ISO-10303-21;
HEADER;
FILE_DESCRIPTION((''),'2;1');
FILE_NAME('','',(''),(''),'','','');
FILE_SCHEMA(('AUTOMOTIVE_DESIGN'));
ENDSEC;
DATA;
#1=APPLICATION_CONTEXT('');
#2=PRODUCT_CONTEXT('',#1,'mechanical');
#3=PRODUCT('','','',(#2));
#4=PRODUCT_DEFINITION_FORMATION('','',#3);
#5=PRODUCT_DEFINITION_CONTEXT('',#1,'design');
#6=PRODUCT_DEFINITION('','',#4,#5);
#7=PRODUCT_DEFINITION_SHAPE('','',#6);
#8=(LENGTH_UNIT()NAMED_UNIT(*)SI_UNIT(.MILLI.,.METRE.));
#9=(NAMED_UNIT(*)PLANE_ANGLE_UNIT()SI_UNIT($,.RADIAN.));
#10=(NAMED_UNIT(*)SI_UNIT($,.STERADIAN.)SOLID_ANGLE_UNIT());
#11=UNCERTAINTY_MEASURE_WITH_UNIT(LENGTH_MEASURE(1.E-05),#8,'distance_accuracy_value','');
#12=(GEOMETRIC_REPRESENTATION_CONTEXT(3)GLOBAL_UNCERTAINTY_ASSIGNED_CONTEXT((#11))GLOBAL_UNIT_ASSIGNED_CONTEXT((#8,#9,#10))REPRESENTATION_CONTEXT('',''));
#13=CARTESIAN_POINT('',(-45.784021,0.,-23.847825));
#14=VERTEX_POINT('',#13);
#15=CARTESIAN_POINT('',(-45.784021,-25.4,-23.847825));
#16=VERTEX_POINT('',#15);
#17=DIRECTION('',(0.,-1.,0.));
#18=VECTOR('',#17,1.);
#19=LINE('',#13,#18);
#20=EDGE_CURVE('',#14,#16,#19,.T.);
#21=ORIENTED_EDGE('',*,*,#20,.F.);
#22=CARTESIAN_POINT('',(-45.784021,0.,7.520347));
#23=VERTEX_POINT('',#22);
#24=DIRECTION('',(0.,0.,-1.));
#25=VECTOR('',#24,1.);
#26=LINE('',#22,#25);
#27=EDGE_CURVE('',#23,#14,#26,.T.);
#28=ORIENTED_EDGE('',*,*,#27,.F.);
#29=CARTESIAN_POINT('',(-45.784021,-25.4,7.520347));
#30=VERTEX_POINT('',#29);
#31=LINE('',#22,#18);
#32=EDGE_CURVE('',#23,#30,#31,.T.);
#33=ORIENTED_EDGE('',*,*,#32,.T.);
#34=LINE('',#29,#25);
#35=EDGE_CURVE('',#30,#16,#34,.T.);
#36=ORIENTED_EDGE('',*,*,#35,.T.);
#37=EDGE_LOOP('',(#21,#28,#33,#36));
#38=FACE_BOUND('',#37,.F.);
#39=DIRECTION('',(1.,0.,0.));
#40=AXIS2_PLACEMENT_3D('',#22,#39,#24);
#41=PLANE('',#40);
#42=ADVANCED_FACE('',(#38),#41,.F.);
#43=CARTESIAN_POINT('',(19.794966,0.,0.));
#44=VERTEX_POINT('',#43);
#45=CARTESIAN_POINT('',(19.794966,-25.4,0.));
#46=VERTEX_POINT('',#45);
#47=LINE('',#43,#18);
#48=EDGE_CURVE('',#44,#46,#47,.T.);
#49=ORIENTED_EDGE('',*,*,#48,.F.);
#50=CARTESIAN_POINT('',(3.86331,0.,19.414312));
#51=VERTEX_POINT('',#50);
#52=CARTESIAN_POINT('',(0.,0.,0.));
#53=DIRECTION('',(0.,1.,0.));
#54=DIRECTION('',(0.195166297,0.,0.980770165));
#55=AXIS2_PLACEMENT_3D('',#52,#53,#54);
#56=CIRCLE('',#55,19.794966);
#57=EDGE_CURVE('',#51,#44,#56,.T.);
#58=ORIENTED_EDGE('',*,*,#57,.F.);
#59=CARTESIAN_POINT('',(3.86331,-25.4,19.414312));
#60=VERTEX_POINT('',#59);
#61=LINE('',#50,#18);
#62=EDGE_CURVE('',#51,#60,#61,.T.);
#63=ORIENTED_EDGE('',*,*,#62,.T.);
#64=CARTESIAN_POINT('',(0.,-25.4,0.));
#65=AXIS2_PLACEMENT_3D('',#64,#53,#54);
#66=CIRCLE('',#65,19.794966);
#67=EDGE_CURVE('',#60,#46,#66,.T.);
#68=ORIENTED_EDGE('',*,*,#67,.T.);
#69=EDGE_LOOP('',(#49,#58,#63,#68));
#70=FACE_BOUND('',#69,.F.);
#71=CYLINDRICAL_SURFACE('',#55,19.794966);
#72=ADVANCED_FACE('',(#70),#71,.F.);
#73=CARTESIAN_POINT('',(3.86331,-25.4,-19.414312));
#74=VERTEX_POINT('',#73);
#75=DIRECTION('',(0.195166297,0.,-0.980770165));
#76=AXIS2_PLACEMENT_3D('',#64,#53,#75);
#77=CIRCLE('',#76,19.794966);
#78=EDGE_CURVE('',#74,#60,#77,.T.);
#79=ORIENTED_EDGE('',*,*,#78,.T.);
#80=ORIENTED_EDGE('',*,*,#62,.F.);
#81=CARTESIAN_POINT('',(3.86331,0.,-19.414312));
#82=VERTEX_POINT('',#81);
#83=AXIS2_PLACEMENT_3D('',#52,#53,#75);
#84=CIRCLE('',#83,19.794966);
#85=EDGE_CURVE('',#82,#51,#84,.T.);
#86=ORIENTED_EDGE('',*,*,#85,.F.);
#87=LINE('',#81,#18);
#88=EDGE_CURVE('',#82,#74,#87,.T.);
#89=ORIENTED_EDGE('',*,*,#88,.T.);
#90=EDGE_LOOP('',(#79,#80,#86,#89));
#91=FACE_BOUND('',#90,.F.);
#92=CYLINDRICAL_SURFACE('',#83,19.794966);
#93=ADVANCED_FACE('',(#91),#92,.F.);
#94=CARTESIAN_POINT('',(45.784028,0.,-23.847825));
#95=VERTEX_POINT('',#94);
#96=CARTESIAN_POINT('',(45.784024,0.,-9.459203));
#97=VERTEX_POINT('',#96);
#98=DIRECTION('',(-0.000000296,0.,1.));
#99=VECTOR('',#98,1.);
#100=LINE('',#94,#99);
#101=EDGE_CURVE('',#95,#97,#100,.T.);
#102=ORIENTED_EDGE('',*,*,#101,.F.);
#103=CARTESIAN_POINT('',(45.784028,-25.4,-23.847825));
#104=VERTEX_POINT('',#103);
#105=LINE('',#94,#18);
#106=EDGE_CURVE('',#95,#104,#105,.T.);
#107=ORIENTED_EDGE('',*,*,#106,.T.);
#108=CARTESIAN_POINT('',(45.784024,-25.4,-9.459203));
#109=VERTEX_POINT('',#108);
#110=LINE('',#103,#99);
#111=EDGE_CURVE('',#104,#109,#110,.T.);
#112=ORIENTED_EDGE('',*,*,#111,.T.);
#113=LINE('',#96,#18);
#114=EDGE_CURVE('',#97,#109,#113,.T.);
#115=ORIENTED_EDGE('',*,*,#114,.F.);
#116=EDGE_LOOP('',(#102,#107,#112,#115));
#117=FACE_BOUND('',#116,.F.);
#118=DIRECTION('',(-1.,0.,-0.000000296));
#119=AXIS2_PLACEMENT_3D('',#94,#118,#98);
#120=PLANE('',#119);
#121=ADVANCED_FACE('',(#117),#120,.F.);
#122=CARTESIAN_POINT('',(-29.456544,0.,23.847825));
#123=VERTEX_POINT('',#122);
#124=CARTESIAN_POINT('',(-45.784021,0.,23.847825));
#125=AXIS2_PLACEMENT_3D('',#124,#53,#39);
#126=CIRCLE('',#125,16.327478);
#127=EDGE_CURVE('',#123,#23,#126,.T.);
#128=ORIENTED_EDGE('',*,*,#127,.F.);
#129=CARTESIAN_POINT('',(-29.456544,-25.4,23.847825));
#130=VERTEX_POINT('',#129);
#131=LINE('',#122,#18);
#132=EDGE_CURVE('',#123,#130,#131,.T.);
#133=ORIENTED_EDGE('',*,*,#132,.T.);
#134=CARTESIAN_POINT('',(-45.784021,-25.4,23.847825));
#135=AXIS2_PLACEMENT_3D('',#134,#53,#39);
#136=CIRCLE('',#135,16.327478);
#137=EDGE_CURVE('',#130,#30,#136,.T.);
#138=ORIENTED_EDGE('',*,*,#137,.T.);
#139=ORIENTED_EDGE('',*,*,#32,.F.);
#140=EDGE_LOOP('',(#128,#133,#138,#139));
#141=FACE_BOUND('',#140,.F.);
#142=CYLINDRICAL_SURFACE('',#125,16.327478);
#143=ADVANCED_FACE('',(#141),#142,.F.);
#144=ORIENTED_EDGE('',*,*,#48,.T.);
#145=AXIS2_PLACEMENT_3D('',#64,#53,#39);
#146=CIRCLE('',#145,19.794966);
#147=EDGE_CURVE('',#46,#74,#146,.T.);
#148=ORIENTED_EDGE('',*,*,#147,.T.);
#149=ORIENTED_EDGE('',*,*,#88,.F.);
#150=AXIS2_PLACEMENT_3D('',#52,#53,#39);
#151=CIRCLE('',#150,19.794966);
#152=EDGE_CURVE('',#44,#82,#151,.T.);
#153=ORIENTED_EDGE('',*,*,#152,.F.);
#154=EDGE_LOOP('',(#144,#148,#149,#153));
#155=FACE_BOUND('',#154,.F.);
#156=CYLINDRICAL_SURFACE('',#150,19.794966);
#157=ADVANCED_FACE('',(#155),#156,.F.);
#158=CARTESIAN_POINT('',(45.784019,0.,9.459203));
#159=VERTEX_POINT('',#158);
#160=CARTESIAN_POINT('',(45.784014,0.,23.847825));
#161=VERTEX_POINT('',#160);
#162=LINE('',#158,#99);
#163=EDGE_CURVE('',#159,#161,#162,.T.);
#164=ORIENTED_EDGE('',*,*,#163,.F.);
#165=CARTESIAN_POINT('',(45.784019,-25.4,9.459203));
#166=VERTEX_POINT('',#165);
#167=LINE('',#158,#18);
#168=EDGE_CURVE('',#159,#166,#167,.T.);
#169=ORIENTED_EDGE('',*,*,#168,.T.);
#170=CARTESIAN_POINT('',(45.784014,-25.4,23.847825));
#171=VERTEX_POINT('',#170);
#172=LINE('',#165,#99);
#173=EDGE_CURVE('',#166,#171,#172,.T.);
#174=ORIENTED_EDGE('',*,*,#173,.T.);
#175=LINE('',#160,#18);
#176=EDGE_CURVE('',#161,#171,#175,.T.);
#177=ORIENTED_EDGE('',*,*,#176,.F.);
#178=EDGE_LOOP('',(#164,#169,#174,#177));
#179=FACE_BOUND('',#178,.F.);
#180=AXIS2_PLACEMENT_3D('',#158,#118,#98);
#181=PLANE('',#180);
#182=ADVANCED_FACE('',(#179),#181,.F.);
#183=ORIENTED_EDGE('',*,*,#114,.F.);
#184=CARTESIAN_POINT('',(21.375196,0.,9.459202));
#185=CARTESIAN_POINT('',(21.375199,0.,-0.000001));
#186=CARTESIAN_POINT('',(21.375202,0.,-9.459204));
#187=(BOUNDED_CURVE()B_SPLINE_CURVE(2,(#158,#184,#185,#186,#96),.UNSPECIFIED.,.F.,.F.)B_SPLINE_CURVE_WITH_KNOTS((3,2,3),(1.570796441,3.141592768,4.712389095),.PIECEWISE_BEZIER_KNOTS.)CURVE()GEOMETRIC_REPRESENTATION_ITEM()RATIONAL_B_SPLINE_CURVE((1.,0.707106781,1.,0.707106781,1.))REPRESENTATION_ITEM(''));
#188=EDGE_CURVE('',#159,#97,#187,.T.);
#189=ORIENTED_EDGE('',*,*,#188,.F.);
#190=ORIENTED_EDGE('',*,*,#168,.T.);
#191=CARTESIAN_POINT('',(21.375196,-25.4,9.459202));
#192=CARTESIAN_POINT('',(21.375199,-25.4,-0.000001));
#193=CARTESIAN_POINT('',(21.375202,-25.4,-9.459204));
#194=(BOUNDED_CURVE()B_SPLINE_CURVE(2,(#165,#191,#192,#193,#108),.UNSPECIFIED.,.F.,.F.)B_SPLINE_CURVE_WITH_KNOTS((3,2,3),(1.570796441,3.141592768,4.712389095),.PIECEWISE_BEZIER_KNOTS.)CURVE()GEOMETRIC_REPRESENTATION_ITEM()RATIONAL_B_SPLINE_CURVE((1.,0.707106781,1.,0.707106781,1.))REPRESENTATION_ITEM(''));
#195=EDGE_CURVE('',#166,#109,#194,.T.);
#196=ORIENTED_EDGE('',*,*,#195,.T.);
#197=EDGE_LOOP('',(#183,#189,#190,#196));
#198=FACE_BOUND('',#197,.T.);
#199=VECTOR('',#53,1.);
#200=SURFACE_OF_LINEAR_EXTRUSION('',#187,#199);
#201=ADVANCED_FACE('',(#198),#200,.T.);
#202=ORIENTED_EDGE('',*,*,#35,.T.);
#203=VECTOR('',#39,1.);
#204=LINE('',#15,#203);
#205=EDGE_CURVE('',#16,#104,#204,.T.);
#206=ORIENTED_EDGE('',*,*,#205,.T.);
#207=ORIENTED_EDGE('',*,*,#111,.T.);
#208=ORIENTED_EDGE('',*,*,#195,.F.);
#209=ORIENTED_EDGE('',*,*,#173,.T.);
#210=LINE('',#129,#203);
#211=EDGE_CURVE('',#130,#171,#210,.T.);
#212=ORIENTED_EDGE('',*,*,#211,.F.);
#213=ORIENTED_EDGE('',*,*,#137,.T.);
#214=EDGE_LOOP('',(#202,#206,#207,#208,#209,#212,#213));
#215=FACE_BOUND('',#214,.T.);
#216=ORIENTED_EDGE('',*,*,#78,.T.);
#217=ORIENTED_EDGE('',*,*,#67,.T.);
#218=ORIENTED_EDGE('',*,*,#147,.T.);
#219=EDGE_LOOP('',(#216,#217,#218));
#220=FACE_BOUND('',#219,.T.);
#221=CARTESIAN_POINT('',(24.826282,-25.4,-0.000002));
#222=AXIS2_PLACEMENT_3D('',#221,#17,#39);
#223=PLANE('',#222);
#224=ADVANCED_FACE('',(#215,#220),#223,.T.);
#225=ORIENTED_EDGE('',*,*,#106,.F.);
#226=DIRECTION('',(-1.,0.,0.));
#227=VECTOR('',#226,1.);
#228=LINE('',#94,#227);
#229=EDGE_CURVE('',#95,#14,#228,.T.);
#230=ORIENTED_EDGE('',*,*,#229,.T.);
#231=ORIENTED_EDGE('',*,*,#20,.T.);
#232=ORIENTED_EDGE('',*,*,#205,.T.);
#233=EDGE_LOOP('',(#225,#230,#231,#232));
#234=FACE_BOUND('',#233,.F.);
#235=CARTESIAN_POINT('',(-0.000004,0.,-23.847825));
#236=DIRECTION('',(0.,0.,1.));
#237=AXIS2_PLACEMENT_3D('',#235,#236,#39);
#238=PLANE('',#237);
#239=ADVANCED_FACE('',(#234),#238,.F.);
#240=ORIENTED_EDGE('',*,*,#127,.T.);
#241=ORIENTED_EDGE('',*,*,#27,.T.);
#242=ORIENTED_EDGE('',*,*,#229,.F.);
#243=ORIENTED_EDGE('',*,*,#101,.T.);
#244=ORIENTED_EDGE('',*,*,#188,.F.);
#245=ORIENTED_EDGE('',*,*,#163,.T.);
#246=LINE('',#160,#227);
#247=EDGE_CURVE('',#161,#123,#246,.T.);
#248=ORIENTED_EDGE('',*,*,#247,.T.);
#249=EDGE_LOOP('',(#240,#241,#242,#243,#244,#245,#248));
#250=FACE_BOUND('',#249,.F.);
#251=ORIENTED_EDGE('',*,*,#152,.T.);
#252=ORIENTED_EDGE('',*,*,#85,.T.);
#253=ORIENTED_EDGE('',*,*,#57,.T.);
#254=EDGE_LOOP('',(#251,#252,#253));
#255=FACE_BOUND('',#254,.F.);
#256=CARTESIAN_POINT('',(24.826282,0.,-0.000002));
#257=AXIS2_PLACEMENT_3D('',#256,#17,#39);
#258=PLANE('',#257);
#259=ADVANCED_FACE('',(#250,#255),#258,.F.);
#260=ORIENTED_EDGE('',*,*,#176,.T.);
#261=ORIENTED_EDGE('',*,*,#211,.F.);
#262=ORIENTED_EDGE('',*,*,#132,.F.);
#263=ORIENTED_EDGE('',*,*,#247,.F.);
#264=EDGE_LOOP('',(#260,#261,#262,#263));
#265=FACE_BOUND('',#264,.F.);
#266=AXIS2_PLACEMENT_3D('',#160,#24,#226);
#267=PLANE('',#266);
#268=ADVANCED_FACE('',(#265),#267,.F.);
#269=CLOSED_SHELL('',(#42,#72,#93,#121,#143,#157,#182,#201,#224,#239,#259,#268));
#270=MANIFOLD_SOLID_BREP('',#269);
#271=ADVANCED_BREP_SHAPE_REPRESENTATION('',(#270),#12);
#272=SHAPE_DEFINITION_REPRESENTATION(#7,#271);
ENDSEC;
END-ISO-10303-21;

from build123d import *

# Parameters (mm, degrees)
F1_DEPTH = 25.4
F2_DEPTH = 25.4


with BuildPart() as f1:
    # F0 (on Front) → F1 (new body)
    with BuildSketch(Plane.XZ):
        with BuildLine():
            ThreePointArc((-29.4565436219, 23.8478247362), (-34.2387511178, 12.3025545416), (-45.7840213124, 7.5203470458))
            Line((-45.7840213124, 7.5203470458), (-45.7840213124, -23.8478247362))
            Line((-45.7840213124, -23.8478247362), (-3.5301e-06, -23.8478247362))
            ThreePointArc((-3.5301e-06, -23.8478247362), (2.0304351181, -21.7171458616), (3.8633102693, -19.4143123352))
            ThreePointArc((3.8633102693, -19.4143123352), (-19.7949662714, 0), (3.8633102693, 19.4143123352))
            ThreePointArc((3.8633102693, 19.4143123352), (2.0304351181, 21.7171458616), (-3.5301e-06, 23.8478247362))
            Line((-3.5301e-06, 23.8478247362), (-29.4565436219, 23.8478247362))
        make_face()
    extrude(amount=F1_DEPTH)

    # F0 (on Front) → F2 (join)
    with BuildSketch(Plane.XZ):
        with BuildLine():
            Line((45.7840142522, 23.8478247362), (-3.5301e-06, 23.8478247362))
            ThreePointArc((-3.5301e-06, 23.8478247362), (2.0304351181, 21.7171458616), (3.8633102693, 19.4143123352))
            ThreePointArc((3.8633102693, 19.4143123352), (15.3022022298, 12.5572009861), (19.7949662714, 0))
            ThreePointArc((19.7949662714, 0), (15.3022022298, -12.5572009861), (3.8633102693, -19.4143123352))
            ThreePointArc((3.8633102693, -19.4143123352), (2.0304351181, -21.7171458616), (-3.5301e-06, -23.8478247362))
            Line((-3.5301e-06, -23.8478247362), (45.7840283725, -23.8478247362))
            Line((45.7840283725, -23.8478247362), (45.7840241128, -9.4592027554))
            add(Edge.make_bspline(
                [(45.784018512, 9.4592027554), (21.3751961487, 9.4592016702), (21.3751989491, -1.0852e-06), (21.3752017495, -9.4592038407), (45.7840241128, -9.4592027554)],
                knots=[1.5707964415, 1.5707964415, 1.5707964415, 3.1415927683, 3.1415927683, 4.7123890951, 4.7123890951, 4.7123890951], degree=2, weights=[1, 0.7071067812, 1, 0.7071067812, 1]))
            Line((45.784018512, 9.4592027554), (45.7840142522, 23.8478247362))
        make_face()
    extrude(amount=F2_DEPTH)


solid = f1.part
